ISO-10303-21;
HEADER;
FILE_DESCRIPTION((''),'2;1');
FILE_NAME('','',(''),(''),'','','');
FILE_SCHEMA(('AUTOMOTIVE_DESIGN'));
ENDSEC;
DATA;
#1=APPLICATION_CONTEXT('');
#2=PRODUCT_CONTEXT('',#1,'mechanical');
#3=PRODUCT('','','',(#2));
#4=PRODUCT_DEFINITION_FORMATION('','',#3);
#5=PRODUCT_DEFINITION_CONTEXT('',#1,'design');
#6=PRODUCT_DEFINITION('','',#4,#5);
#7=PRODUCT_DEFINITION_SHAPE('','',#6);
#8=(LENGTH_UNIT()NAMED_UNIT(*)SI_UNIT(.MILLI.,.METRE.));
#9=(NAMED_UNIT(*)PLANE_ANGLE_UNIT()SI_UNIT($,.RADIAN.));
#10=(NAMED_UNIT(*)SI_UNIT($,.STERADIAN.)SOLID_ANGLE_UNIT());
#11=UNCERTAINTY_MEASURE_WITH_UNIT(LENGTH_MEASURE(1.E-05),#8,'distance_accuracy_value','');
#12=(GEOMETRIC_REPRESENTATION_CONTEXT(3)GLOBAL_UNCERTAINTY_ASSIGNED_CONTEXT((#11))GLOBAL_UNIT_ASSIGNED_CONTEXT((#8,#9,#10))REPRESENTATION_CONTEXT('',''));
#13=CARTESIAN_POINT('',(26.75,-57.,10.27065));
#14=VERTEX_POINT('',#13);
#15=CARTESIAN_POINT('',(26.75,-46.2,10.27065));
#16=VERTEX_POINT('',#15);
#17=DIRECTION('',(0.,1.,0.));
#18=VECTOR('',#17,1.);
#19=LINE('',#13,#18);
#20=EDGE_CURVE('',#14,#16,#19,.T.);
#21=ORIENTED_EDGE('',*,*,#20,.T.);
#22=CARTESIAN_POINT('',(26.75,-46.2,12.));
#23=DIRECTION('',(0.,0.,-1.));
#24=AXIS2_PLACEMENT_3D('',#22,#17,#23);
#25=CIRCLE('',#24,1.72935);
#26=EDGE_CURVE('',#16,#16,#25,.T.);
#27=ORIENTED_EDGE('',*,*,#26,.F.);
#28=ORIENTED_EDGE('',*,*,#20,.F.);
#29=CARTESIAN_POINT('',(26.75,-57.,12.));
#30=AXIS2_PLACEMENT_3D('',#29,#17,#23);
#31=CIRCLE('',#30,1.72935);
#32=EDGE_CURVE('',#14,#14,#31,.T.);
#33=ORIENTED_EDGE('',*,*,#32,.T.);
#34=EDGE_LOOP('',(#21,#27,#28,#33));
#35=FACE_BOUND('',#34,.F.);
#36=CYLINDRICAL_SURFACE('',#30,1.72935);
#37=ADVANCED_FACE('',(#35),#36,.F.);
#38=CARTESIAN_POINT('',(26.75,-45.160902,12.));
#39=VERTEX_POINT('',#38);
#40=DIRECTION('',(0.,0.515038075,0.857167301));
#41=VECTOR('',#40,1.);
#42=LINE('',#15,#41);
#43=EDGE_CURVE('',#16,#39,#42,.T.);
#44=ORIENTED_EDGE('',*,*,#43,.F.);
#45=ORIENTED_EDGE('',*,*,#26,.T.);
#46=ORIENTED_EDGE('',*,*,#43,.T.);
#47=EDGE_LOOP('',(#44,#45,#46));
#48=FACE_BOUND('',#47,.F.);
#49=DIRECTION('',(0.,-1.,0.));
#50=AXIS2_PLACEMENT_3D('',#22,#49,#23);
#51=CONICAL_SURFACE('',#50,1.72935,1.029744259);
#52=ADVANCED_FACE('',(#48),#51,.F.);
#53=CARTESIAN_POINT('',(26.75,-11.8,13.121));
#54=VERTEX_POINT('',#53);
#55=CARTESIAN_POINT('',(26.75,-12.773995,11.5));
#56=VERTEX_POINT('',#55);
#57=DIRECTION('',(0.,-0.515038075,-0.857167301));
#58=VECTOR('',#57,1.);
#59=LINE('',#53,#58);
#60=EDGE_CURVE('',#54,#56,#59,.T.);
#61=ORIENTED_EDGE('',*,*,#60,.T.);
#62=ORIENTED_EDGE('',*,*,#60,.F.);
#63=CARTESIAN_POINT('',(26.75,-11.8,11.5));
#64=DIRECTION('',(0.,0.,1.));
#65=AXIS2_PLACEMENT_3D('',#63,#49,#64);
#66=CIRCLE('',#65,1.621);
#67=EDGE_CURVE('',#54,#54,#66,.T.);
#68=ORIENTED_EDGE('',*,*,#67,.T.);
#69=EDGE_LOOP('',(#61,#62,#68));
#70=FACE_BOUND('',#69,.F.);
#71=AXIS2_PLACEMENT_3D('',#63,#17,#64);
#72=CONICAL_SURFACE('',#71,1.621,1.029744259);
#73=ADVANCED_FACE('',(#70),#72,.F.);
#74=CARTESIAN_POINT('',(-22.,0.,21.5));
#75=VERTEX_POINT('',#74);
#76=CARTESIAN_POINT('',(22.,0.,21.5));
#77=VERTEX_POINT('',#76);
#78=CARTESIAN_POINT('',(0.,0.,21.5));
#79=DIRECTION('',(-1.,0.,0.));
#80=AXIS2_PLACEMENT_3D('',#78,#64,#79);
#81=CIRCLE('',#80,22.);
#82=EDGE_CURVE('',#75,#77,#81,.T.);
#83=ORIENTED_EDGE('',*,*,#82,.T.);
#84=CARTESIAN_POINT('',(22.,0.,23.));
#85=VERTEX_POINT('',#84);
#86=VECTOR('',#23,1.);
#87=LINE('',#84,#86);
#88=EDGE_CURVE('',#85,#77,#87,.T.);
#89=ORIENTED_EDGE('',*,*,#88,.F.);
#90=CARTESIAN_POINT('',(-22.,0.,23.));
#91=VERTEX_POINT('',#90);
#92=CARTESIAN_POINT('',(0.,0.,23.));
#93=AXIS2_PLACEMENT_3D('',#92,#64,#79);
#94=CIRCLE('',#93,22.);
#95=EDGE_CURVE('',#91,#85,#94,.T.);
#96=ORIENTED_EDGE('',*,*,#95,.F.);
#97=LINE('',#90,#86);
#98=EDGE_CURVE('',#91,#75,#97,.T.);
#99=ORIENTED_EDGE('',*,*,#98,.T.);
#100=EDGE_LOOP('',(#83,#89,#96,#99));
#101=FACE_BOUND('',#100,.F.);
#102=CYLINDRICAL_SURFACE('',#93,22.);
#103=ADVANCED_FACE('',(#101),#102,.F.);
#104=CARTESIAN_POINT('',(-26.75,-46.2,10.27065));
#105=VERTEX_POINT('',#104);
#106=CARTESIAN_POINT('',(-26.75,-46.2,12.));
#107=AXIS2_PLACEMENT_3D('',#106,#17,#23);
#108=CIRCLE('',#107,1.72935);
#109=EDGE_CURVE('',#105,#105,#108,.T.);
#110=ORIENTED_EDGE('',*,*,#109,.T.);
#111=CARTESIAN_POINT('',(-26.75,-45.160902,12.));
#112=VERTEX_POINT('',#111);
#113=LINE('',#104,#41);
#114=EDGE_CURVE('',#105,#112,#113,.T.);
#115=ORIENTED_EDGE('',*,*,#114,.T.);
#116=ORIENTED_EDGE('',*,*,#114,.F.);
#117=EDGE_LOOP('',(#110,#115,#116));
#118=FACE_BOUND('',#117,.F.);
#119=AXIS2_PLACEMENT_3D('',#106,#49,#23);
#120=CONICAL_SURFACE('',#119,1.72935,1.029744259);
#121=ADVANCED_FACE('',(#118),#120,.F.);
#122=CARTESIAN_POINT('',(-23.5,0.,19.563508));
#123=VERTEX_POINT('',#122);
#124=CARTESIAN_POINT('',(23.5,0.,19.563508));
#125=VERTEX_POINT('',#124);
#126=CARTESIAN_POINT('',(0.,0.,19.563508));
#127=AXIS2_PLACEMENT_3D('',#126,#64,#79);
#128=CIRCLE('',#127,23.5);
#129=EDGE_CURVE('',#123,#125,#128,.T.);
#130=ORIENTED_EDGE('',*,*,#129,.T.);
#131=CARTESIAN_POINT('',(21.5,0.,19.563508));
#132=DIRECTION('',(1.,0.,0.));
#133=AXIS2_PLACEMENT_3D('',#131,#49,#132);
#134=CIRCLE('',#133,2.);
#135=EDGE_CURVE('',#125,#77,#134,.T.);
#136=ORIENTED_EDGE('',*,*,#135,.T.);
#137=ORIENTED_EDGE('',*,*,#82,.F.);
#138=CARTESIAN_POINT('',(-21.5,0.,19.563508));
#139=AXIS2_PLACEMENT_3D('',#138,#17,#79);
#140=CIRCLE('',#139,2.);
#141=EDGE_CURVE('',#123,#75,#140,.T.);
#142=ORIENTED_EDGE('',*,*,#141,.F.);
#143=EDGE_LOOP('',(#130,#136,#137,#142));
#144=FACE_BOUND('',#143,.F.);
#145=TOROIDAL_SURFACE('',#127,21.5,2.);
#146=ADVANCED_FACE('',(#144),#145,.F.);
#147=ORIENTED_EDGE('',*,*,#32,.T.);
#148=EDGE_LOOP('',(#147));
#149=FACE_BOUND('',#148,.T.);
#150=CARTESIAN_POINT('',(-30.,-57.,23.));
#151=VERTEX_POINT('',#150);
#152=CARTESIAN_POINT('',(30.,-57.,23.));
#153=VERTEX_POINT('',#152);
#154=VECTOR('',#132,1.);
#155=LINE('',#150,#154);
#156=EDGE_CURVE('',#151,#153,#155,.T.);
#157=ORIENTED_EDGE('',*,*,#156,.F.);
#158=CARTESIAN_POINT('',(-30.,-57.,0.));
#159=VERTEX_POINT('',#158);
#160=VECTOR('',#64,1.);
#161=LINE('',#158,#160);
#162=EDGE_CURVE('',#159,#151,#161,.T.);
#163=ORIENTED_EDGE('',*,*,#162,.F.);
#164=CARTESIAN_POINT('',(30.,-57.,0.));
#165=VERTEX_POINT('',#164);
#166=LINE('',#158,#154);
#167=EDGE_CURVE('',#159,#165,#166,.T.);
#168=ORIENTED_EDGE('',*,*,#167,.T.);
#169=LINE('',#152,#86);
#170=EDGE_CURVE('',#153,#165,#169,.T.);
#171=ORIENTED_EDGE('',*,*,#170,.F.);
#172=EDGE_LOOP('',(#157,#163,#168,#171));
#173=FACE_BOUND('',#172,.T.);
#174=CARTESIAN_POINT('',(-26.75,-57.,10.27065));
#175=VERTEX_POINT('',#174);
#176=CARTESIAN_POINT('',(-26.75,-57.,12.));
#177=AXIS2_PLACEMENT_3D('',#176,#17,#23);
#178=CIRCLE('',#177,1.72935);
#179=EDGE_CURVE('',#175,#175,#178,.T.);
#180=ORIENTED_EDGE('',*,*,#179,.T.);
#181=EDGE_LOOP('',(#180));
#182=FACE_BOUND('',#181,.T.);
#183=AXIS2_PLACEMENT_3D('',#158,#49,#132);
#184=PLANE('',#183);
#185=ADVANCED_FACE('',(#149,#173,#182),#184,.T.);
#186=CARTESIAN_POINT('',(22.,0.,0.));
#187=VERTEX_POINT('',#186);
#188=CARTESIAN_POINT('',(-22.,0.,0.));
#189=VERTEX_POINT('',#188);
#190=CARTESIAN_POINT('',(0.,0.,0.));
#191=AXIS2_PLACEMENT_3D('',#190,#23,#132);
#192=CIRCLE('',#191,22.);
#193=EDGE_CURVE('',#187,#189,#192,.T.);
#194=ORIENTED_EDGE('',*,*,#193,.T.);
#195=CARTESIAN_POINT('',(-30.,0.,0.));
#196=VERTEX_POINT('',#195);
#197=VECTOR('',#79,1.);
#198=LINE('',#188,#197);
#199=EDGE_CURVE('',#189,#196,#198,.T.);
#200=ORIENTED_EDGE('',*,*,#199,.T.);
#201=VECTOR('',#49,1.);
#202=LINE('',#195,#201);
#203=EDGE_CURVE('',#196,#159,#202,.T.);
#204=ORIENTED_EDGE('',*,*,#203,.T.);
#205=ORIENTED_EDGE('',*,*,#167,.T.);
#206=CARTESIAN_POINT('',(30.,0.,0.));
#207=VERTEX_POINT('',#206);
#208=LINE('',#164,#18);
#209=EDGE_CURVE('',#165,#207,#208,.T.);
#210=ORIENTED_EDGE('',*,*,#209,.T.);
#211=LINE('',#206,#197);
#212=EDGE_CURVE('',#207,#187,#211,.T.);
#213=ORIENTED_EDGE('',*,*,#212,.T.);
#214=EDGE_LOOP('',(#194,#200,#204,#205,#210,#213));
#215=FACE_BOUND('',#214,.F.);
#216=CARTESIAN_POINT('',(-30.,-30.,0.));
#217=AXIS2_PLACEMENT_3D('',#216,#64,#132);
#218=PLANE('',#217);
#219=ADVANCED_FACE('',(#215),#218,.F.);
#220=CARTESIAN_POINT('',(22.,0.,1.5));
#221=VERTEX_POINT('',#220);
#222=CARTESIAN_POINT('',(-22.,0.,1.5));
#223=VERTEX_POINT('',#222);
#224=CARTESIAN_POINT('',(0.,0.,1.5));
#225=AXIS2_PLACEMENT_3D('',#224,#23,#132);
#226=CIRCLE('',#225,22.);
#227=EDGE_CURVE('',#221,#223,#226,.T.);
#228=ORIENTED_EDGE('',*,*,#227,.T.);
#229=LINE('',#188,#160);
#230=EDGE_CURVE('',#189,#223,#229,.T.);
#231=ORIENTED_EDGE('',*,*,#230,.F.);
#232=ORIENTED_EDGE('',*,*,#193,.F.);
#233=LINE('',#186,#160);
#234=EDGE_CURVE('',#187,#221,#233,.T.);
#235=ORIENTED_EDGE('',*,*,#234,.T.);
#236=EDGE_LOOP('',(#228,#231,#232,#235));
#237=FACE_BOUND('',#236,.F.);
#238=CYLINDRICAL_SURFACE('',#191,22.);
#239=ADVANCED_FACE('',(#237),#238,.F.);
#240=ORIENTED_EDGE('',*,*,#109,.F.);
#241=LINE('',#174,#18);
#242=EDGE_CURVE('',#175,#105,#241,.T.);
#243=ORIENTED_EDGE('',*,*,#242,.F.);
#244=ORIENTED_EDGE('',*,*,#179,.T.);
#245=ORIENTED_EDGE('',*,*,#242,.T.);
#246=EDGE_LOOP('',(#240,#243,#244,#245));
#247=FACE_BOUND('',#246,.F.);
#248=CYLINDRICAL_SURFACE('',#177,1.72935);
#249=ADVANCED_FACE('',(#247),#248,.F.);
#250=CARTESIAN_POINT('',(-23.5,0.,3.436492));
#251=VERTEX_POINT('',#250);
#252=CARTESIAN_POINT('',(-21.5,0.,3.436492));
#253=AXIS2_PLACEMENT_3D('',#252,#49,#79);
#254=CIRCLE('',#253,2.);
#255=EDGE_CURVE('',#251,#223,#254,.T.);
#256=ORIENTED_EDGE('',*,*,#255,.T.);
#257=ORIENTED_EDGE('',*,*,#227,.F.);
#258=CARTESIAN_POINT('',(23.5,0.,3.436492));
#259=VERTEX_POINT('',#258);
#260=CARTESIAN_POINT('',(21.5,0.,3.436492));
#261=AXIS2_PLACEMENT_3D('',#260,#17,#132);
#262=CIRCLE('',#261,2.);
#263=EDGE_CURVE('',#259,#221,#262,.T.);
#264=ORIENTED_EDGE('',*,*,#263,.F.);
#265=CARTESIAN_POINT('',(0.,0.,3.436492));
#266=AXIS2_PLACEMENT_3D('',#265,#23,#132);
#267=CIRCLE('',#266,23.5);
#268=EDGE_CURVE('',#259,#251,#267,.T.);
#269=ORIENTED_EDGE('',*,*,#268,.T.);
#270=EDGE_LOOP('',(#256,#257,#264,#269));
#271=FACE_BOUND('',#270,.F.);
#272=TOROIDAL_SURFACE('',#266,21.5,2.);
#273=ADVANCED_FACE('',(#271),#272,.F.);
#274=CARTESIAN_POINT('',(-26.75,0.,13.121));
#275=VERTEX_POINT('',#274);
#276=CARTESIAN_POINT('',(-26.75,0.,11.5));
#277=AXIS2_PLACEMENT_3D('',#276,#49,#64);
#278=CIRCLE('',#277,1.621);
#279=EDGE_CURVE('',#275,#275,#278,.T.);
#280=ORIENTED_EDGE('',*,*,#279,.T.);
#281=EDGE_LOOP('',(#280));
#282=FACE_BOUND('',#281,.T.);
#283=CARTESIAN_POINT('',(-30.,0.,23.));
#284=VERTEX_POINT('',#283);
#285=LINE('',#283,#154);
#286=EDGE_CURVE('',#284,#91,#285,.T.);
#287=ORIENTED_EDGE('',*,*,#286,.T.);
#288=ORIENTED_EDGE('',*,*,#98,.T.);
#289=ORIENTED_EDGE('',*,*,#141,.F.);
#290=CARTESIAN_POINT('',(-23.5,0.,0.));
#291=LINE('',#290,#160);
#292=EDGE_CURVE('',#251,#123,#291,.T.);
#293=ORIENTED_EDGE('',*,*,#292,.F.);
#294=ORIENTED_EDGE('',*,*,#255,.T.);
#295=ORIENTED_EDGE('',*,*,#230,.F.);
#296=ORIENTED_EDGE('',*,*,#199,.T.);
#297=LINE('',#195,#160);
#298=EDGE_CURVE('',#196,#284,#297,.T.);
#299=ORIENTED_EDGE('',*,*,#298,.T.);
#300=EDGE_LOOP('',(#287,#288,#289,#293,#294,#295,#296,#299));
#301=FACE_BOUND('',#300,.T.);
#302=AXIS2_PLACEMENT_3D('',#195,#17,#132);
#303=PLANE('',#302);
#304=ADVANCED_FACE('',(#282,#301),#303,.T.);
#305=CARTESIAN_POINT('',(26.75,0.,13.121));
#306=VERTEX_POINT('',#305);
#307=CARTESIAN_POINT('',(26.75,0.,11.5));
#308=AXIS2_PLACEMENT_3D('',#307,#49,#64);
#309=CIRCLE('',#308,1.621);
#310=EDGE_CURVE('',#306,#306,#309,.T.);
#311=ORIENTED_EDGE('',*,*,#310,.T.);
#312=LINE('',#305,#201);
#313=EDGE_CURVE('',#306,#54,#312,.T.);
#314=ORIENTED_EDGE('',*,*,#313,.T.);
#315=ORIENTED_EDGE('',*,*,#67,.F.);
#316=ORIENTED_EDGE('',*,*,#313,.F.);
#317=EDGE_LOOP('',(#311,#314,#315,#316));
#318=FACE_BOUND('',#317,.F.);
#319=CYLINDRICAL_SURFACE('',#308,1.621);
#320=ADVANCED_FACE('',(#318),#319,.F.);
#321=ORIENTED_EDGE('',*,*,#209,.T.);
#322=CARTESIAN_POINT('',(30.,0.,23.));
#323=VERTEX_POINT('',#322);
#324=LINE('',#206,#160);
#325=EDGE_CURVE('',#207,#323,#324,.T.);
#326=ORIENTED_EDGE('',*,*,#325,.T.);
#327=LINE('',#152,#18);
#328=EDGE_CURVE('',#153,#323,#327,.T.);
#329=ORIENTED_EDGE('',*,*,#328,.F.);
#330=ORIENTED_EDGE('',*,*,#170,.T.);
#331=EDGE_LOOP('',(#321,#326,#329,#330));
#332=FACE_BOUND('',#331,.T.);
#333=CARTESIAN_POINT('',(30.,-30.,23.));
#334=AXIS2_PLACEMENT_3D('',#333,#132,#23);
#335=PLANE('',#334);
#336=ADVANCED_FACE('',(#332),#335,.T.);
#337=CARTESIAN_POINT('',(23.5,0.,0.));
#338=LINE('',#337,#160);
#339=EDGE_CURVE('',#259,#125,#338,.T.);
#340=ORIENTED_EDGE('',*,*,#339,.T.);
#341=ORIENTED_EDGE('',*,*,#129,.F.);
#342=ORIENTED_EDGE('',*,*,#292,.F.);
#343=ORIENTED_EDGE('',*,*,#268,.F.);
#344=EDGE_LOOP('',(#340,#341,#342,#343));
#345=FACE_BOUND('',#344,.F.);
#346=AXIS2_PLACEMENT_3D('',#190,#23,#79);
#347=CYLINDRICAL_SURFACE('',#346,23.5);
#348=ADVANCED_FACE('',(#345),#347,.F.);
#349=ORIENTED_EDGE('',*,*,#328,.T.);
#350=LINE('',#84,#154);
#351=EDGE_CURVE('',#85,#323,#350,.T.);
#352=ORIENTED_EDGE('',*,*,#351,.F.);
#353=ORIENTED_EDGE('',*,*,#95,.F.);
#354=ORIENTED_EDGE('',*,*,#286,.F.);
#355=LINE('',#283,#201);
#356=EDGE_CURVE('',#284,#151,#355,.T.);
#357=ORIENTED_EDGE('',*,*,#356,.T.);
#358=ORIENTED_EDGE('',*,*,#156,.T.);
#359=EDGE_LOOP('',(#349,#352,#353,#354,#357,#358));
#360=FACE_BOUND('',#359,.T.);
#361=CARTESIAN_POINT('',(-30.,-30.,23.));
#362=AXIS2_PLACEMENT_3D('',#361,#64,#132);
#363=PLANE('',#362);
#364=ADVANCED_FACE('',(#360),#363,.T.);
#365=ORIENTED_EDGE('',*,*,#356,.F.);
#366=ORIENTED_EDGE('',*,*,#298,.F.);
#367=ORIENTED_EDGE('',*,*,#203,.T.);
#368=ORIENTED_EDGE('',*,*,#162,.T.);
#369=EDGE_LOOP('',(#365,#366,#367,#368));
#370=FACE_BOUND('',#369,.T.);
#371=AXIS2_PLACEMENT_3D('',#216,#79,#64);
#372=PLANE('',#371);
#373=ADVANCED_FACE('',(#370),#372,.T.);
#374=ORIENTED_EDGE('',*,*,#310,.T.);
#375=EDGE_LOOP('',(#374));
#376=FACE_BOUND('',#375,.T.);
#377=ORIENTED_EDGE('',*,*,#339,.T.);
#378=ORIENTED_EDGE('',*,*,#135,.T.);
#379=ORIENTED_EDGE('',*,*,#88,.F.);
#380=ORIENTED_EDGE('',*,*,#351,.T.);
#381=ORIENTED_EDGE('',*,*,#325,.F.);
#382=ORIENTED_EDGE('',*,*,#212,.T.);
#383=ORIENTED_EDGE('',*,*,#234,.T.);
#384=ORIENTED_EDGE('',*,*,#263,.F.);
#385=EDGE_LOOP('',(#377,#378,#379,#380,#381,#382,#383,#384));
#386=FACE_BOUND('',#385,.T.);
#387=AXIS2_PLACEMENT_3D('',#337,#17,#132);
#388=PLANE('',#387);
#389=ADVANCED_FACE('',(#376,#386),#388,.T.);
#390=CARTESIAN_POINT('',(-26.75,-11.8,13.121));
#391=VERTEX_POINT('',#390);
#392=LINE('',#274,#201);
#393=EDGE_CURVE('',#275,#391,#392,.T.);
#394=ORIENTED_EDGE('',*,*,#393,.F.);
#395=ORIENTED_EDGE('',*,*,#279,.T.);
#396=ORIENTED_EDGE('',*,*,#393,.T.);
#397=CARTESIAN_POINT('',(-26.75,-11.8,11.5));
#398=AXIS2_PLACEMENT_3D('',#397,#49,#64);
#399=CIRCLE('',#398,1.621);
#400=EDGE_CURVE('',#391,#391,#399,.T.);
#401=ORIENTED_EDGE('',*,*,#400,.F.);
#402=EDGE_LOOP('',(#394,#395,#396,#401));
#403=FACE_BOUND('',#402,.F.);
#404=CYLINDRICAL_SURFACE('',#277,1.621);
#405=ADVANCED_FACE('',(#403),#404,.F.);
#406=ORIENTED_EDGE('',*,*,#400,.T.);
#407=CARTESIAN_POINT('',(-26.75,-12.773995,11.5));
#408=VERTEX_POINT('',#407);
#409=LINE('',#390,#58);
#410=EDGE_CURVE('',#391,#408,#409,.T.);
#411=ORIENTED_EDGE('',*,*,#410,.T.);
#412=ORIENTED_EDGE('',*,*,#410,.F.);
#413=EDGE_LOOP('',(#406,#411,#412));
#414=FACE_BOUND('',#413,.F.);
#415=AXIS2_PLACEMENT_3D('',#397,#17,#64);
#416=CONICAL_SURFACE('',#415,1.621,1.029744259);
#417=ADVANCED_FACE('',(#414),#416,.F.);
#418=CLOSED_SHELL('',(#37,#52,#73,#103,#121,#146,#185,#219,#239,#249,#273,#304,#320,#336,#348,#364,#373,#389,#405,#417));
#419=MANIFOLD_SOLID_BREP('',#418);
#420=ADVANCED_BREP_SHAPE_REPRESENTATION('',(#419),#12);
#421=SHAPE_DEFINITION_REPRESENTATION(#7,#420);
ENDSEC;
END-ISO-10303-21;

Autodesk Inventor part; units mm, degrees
ref_plane "YZ Plane" through (0, 0, 0) normal (1, 0, 0) x (0, 1, 0)
ref_plane "XZ Plane" through (0, 0, 0) normal (0, 1, 0) x (-1, 0, 0)
ref_plane "XY Plane" through (0, 0, 0) normal (0, 0, 1) x (1, 0, 0)
sketch "Sketch1" plane through (0, 0, 0) normal (0, 0, 1) x (1, 0, 0)
  arc A0 (-23.5, 0) -> (23.5, 0) centre (0, 0) ccw
  line L0 (30, 0) -> (30, -30)
  line L1 (30, -30) -> (-30, -30)
  line L2 (-30, -30) -> (-30, 0)
  line L3 (-30, 0) -> (-23.5, 0)
  line L4 (23.5, 0) -> (30, 0)
  dimension "d0" = 47
  dimension "d1" = 30
  dimension "d3" = 60
  dimension "d4" = 30
extrude "Extrusion1" add sketch "Sketch1" along normal blind 23
ref_plane "Work Plane1" through (0, 0, 23) normal (0, 0, 1) x (1, 0, 0)
sketch "Sketch2" plane through (0, 0, 23) normal (0, 0, 1) x (1, 0, 0)
  line L0 (30, 0) -> (23.5, 0) projected
  arc A0 (-23.5, 0) -> (23.5, 0) centre (0, 0) ccw
  arc A1 (-22, 0) -> (22, 0) centre (0, 0) ccw
  line L1 (-23.5, 0) -> (-22, 0)
  line L2 (22, 0) -> (23.5, 0)
  dimension "d8" = 44
extrude "Extrusion2" add sketch "Sketch2" against normal blind 1.5
fillet "Fillet1" radius 2 1 edges at (0, -23.5, 21.5)
ref_plane "Work Plane2" through (0, 0, 0) normal (0, 0, -1) x (-1, 0, 0)
sketch "Sketch3" plane through (0, 0, 0) normal (0, 0, -1) x (-1, 0, 0)
  arc A0 (-23.5, 0) -> (23.5, 0) centre (0, 0) ccw
  arc A1 (-22, 0) -> (22, 0) centre (0, 0) ccw
  line L0 (23.5, 0) -> (30, 0) projected
  line L1 (23.5, 0) -> (22, 0)
  line L2 (-22, 0) -> (-23.5, 0)
extrude "Extrusion3" add sketch "Sketch3" against normal blind 1.5
fillet "Fillet2" radius 2 1 edges at (0, -23.5, 1.5)
sketch "Sketch4" plane through (-30, 0, 23) normal (0, 1, 0) x (1, 0, 0)
  line L0 (-12, 23) -> (72, 23) projected
  line L1 (0, 23) -> (0, 0) projected
  line L2 (53.5, 19.5635) -> (53.5, 3.4365) projected
  point P0 (30, 23)
  point P1 (3.25, 11.5)
  point P2 (56.75, 11.5)
  dimension "d16" = 11.5
  dimension "d17" = 3.25
  dimension "d18" = 3.25
hole "Hole1" at (-26.75, 0, 11.5) at (26.75, 0, 11.5) direction (0, -1, 0) diameter 3.242 depth 11.8 tip angle 118 thread size "M4x0.7" class "6H" standard "ISO Metric profile"
sketch "Sketch5" plane through (-30, -30, 0) normal (0, -1, 0) x (1, 0, 0)
  line L0 (0, 0) -> (0, 23) projected
  line L1 (0, 0) -> (60, 0) projected
  circle A0 centre (3.25, 11.5) radius 2.5
  circle A1 centre (56.75, 11.5) radius 1.621 projected
  circle A2 centre (56.75, 11.5) radius 2.5
  point P0 (30, 0)
  dimension "d26" = 3.25
  dimension "d27" = 11.5
  dimension "d28" = 5
  dimension "d29" = 5
sketch "Sketch6" plane through (-30, -30, 0) normal (0, -1, 0) x (1, 0, 0)
  line L0 (0, 23) -> (60, 23) projected
  line L1 (0, 0) -> (60, 0) projected
  line L2 (0, 23) -> (60, 23)
  line L3 (60, 23) -> (60, 0)
  line L4 (60, 0) -> (0, 0)
  line L5 (0, 0) -> (0, 23)
  point P0 (30, 0)
  point P1 (60, 23)
extrude "Extrusion4" add sketch "Sketch6" along normal blind 27
sketch "Sketch8" plane through (-30, -57, 0) normal (0, -1, 0) x (1, 0, 0)
  line L0 (60, 0) -> (60, 23) projected
  line L1 (0, 23) -> (0, 0) projected
  line L2 (60, 23) -> (0, 23) projected
  point P0 (30, 0)
  point P1 (56.75, 12)
  point P2 (3.25, 12)
  point P3 (60, 11.5)
  point P4 (0, 11.5)
  dimension "d42" = 3.25
  dimension "d43" = 3.25
  dimension "d44" = 11
  dimension "d45" = 11
hole "Hole3" at (26.75, -57, 12) at (-26.75, -57, 12) direction (0, 1, 0) diameter 3.4587 depth 10.8 tip angle 118 thread size "M4x0.5" class "6H" standard "ISO Metric profile"
equation "\"BendRadius\" = Thickness"
equation "\"BendReliefWidth\" = Thickness"
equation "\"BendReliefDepth\" = 0.5 * Thickness"
equation "\"CornerReliefSize\" = 4 * Thickness"
equation "\"MinimumRemnant\" = 2 * Thickness"
equation "\"TransitionRadius\" = BendRadius"
equation "\"JacobiRadiusSize\" = BendRadius"
equation "\"GapSize\" = Thickness"
equation "\"Thickness\" = 0.5"
properties part number "Bearing housing bottom"
